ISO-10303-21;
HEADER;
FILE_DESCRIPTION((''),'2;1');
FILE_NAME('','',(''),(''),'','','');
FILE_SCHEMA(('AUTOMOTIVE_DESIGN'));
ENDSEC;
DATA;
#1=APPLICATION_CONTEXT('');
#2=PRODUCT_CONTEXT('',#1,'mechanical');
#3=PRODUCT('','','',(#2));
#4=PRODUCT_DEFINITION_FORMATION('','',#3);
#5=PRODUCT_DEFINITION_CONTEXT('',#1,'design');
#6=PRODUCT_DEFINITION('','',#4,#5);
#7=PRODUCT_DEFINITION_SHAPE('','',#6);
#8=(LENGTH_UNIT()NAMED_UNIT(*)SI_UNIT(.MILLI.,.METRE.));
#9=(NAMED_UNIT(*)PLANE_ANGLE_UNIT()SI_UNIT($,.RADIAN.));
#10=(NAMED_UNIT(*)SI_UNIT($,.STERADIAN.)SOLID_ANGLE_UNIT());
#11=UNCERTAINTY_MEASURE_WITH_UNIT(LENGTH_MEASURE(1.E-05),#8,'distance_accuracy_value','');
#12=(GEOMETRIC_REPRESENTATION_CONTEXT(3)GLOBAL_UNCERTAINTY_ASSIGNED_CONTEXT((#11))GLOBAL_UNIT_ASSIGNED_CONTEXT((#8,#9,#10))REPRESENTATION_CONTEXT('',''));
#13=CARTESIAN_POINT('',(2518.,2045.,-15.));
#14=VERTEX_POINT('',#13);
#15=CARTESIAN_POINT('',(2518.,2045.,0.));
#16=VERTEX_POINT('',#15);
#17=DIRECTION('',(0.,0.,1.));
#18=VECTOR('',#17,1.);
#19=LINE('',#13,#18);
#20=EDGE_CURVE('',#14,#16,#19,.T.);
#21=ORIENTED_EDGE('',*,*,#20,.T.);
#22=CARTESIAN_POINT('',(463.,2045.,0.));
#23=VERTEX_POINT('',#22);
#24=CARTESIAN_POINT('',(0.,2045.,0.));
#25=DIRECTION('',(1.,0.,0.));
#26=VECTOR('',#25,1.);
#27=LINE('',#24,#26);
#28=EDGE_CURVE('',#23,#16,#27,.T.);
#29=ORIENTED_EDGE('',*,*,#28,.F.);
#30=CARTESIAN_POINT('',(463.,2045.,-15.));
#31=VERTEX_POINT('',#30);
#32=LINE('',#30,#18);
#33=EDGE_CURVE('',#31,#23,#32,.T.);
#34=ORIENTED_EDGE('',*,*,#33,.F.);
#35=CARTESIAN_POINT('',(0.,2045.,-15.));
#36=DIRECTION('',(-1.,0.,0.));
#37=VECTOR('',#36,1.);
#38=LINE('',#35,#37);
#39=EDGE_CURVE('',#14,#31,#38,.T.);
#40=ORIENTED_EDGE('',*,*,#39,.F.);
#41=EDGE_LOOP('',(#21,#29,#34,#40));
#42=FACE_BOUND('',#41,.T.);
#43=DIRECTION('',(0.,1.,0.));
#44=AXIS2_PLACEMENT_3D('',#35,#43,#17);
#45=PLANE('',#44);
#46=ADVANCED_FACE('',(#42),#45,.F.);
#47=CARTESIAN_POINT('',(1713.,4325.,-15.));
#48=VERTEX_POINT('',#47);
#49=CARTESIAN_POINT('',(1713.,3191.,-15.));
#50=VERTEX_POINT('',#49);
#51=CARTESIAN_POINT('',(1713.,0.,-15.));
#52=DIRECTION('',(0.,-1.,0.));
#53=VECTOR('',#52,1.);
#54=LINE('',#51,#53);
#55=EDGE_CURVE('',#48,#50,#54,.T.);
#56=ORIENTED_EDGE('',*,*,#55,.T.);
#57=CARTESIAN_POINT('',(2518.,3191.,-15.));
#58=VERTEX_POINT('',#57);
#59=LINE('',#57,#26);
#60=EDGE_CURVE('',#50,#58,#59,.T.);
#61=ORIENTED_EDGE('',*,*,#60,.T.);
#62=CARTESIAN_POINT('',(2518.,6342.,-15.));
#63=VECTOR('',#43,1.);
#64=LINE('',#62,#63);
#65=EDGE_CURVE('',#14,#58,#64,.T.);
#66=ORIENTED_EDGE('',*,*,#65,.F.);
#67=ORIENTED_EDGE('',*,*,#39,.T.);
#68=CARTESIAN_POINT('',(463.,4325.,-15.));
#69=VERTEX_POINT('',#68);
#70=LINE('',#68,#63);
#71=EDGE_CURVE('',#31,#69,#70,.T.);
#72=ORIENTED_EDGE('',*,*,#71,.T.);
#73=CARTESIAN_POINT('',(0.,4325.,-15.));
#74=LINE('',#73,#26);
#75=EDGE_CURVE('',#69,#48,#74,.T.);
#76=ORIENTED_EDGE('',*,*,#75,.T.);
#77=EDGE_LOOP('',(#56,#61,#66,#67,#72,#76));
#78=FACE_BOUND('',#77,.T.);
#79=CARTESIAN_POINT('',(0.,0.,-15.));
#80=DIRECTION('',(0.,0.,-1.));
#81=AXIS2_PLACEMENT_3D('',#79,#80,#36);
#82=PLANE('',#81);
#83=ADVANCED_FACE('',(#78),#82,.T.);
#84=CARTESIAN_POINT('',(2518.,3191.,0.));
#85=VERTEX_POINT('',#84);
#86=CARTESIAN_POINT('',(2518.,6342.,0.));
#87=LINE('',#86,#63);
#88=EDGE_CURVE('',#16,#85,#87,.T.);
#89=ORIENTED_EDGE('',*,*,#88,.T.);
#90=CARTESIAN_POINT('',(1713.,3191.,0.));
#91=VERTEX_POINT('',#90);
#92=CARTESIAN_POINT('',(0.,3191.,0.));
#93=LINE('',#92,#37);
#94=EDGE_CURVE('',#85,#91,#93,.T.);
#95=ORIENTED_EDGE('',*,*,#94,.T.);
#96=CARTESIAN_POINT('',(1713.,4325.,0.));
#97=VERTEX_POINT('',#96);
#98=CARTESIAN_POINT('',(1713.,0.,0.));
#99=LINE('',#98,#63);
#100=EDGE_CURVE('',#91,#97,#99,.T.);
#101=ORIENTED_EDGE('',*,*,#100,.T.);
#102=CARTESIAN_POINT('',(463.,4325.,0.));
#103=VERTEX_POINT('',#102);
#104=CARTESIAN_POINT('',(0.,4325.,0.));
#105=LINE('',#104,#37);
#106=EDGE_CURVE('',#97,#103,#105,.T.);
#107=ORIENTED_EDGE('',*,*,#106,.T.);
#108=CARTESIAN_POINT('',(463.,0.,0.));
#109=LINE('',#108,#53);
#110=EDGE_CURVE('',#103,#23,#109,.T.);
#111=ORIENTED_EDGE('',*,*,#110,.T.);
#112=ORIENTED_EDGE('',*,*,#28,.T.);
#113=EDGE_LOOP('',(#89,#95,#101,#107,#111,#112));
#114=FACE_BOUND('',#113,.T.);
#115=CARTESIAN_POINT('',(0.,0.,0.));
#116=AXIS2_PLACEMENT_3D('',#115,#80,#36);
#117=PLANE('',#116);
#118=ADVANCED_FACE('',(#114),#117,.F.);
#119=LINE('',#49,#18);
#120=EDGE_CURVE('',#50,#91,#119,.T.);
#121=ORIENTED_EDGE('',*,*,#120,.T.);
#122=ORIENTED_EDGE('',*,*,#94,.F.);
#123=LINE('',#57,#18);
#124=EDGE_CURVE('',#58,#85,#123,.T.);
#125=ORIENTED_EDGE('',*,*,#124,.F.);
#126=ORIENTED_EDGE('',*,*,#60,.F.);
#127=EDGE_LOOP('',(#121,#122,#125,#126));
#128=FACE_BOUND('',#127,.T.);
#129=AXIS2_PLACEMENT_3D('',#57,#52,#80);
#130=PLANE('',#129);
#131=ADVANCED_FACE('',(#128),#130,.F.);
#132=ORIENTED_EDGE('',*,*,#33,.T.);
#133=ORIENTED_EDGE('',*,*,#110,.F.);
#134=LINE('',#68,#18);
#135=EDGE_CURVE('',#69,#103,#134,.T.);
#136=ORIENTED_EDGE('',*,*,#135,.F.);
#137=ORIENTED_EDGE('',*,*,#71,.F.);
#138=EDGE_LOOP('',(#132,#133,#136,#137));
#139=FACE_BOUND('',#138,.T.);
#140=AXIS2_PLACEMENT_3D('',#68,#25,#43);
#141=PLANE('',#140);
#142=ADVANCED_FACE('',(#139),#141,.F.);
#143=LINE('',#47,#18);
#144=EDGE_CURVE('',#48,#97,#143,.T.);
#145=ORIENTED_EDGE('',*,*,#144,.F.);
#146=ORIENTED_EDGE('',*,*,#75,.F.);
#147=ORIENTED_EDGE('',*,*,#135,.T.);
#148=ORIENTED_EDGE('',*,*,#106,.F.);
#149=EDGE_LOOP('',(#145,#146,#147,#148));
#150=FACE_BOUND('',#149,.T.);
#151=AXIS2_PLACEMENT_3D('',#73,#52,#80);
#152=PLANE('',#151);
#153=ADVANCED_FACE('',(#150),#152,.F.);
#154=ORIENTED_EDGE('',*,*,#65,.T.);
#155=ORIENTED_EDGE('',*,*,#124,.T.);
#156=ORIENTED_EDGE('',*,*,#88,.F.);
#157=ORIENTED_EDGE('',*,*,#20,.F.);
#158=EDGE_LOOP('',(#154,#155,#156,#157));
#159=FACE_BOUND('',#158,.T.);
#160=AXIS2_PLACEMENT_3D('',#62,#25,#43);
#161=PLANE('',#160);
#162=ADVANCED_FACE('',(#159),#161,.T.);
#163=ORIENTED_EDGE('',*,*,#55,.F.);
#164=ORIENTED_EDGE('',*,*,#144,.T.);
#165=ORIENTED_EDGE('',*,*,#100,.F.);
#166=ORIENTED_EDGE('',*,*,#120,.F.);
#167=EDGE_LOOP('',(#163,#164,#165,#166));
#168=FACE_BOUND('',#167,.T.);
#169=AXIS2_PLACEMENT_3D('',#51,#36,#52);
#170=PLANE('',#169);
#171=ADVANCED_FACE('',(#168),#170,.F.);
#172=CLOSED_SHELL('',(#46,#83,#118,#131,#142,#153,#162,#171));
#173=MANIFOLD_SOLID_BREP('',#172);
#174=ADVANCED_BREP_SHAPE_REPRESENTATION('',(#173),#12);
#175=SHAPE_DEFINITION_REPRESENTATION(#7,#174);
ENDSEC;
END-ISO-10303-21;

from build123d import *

# Parameters (mm, degrees)
TABAN_FLAN_1_DEPTH          = 15
KES_EKSTR_ZYON1_DEPTH       = 6824.599709831
KES_EKSTR_ZYON1_DEPTH_BACK  = 6824.599709831
IZIM2_W                     = 2518
IZIM2_H                     = 130
KES_EKSTR_ZYON2_DEPTH       = 6824.599709831
KES_EKSTR_ZYON2_DEPTH_BACK  = 6824.599709831
IZIM3_W                     = 2518
IZIM3_H                     = 135
KES_EKSTR_ZYON3_DEPTH       = 6824.599709831
KES_EKSTR_ZYON3_DEPTH_BACK  = 6824.599709831
IZIM4_W                     = 848
IZIM4_H                     = 915
KES_EKSTR_ZYON4_DEPTH       = 5983.714935546
KES_EKSTR_ZYON4_DEPTH_BACK  = 5983.714935546
IZIM5_W                     = 848
IZIM5_H                     = 467
KES_EKSTR_ZYON5_DEPTH       = 5563.566763644
KES_EKSTR_ZYON5_DEPTH_BACK  = 5563.566763644
IZIM6_W                     = 2518
IZIM6_H                     = 805
IZIM6_W_2                   = 848
IZIM6_H_2                   = 3
KES_EKSTR_ZYON6_DEPTH       = 5560.891905424
KES_EKSTR_ZYON6_DEPTH_BACK  = 5560.891905424
IZIM7_W                     = 2518
IZIM7_H                     = 440
KES_EKSTR_ZYON7_DEPTH       = 5560.891905424
KES_EKSTR_ZYON7_DEPTH_BACK  = 5560.891905424
IZIM8_W                     = 2518
IZIM8_H                     = 102
KES_EKSTR_ZYON8_DEPTH       = 5560.891905424
KES_EKSTR_ZYON8_DEPTH_BACK  = 5560.891905424
IZIM9_W                     = 2518
IZIM9_H                     = 158
IZIM10_W                    = 542
IZIM10_H                    = 327
SEKME1_DEPTH                = 15
KES_EKSTR_ZYON9_DEPTH       = 5560.891905424
KES_EKSTR_ZYON9_DEPTH_BACK  = 5560.891905424
IZIM11_W                    = 1127
IZIM11_H                    = 305
IZIM12_W                    = 1390
IZIM12_H                    = 43
SEKME2_DEPTH                = 15
KES_EKSTR_ZYON10_DEPTH      = 5599.263034192
KES_EKSTR_ZYON10_DEPTH_BACK = 5599.263034192
IZIM13_W                    = 2518
IZIM13_H                    = 127
KES_EKSTR_ZYON11_DEPTH      = 5599.263034192
KES_EKSTR_ZYON11_DEPTH_BACK = 5599.263034192
IZIM14_W                    = 385
IZIM14_H                    = 675
IZIM14_W_2                  = 2518
IZIM14_H_2                  = 148
KES_EKSTR_ZYON12_DEPTH      = 5599.263034192
KES_EKSTR_ZYON12_DEPTH_BACK = 5599.263034192
IZIM15_W                    = 569.702453624
IZIM15_H                    = 675
KES_EKSTR_ZYON13_DEPTH      = 5599.263034192
KES_EKSTR_ZYON13_DEPTH_BACK = 5599.263034192
IZIM16_W                    = 1005
IZIM16_H                    = 305
KES_EKSTR_ZYON14_DEPTH      = 5328.623672896
KES_EKSTR_ZYON14_DEPTH_BACK = 5328.623672896
IZIM17_W                    = 200
IZIM17_H                    = 370
IZIM17_W_2                  = 3
IZIM17_H_2                  = 2280
KES_EKSTR_ZYON16_DEPTH      = 5005.615269928
KES_EKSTR_ZYON16_DEPTH_BACK = 5005.615269928
KES_EKSTR_ZYON17_DEPTH      = 5005.615269928
KES_EKSTR_ZYON17_DEPTH_BACK = 5005.615269928
IZIM20_W                    = 805
IZIM20_H                    = 164


# Sheet-metal steps are written as plain solids
with BuildPart() as part:
    # Çizim1 → Taban-Flanş1 (new body)
    with BuildSketch(Plane.XY):
        Polygon((0, 0), (0, 4630), (1505, 4630), (1505, 6342), (2518, 6342), (2518, 0), align=None)
    extrude(amount=-TABAN_FLAN_1_DEPTH)

    # Çizim2 → Kes-Ekstrüzyon1 (cut, two sides: drawn at the far end of the back side and taken through both)
    with BuildSketch(Plane.XY.offset(-KES_EKSTR_ZYON1_DEPTH_BACK)):
        with Locations((1259, 65)):
            Rectangle(IZIM2_W, IZIM2_H)
    extrude(amount=KES_EKSTR_ZYON1_DEPTH + KES_EKSTR_ZYON1_DEPTH_BACK, mode=Mode.SUBTRACT)

    # Çizim3 → Kes-Ekstrüzyon2 (cut, two sides: drawn at the far end of the back side and taken through both)
    with BuildSketch(Plane.XY.offset(-KES_EKSTR_ZYON2_DEPTH_BACK)):
        with Locations((1259, 197.5)):
            Rectangle(IZIM3_W, IZIM3_H)
    extrude(amount=KES_EKSTR_ZYON2_DEPTH + KES_EKSTR_ZYON2_DEPTH_BACK, mode=Mode.SUBTRACT)

    # Çizim4 → Kes-Ekstrüzyon3 (cut, two sides: drawn at the far end of the back side and taken through both)
    with BuildSketch(Plane.XY.offset(-KES_EKSTR_ZYON3_DEPTH_BACK)):
        with Locations((2094, 5884.5)):
            Rectangle(IZIM4_W, IZIM4_H)
        Polygon((1670, 6342), (1505, 6342), (1505, 4630), (1670, 4630), (1670, 5427), align=None)
    extrude(amount=KES_EKSTR_ZYON3_DEPTH + KES_EKSTR_ZYON3_DEPTH_BACK, mode=Mode.SUBTRACT)

    # Çizim5 → Kes-Ekstrüzyon4 (cut, two sides: drawn at the far end of the back side and taken through both)
    with BuildSketch(Plane.XY.offset(-KES_EKSTR_ZYON4_DEPTH_BACK)):
        with Locations((2094, 5193.5)):
            Rectangle(IZIM5_W, IZIM5_H)
    extrude(amount=KES_EKSTR_ZYON4_DEPTH + KES_EKSTR_ZYON4_DEPTH_BACK, mode=Mode.SUBTRACT)

    # Çizim6 → Kes-Ekstrüzyon5 (cut, two sides: drawn at the far end of the back side and taken through both)
    with BuildSketch(Plane.XY.offset(-KES_EKSTR_ZYON5_DEPTH_BACK)):
        with Locations((1259, 667.5)):
            Rectangle(IZIM6_W, IZIM6_H)
        with Locations((2094, 4958.5)):
            Rectangle(IZIM6_W_2, IZIM6_H_2)
    extrude(amount=KES_EKSTR_ZYON5_DEPTH + KES_EKSTR_ZYON5_DEPTH_BACK, mode=Mode.SUBTRACT)

    # Çizim7 → Kes-Ekstrüzyon6 (cut, two sides: drawn at the far end of the back side and taken through both)
    with BuildSketch(Plane.XY.offset(-KES_EKSTR_ZYON6_DEPTH_BACK)):
        with Locations((1259, 1290)):
            Rectangle(IZIM7_W, IZIM7_H)
    extrude(amount=KES_EKSTR_ZYON6_DEPTH + KES_EKSTR_ZYON6_DEPTH_BACK, mode=Mode.SUBTRACT)

    # Çizim8 → Kes-Ekstrüzyon7 (cut, two sides: drawn at the far end of the back side and taken through both)
    with BuildSketch(Plane.XY.offset(-KES_EKSTR_ZYON7_DEPTH_BACK)):
        with Locations((1259, 1561)):
            Rectangle(IZIM8_W, IZIM8_H)
    extrude(amount=KES_EKSTR_ZYON7_DEPTH + KES_EKSTR_ZYON7_DEPTH_BACK, mode=Mode.SUBTRACT)

    # Çizim9 → Kes-Ekstrüzyon8 (cut, two sides: drawn at the far end of the back side and taken through both)
    with BuildSketch(Plane.XY.offset(-KES_EKSTR_ZYON8_DEPTH_BACK)):
        with Locations((1259, 1691)):
            Rectangle(IZIM9_W, IZIM9_H)
    extrude(amount=KES_EKSTR_ZYON8_DEPTH + KES_EKSTR_ZYON8_DEPTH_BACK, mode=Mode.SUBTRACT)

    # Çizim10 → Sekme1 (add)
    with BuildSketch(Plane.XY):
        with Locations((1399, 4793.5)):
            Rectangle(IZIM10_W, IZIM10_H)
    extrude(amount=-SEKME1_DEPTH)

    # Çizim11 → Kes-Ekstrüzyon9 (cut, two sides: drawn at the far end of the back side and taken through both)
    with BuildSketch(Plane.XY.offset(-KES_EKSTR_ZYON9_DEPTH_BACK)):
        with Locations((563.5, 4477.5)):
            Rectangle(IZIM11_W, IZIM11_H)
    extrude(amount=KES_EKSTR_ZYON9_DEPTH + KES_EKSTR_ZYON9_DEPTH_BACK, mode=Mode.SUBTRACT)

    # Çizim12 → Sekme2 (add)
    with BuildSketch(Plane.XY):
        with Locations((1823, 4978.5)):
            Rectangle(IZIM12_W, IZIM12_H)
    extrude(amount=-SEKME2_DEPTH)

    # Çizim13 → Kes-Ekstrüzyon10 (cut, two sides: drawn at the far end of the back side and taken through both)
    with BuildSketch(Plane(origin=(0, 0, -15), x_dir=(-1, 0, 0), z_dir=(0, 0, -1)).offset(-KES_EKSTR_ZYON10_DEPTH_BACK)):
        with Locations((-1259, 1833.5)):
            Rectangle(IZIM13_W, IZIM13_H)
    extrude(amount=KES_EKSTR_ZYON10_DEPTH + KES_EKSTR_ZYON10_DEPTH_BACK, mode=Mode.SUBTRACT)

    # Çizim14 → Kes-Ekstrüzyon11 (cut, two sides: drawn at the far end of the back side and taken through both)
    with BuildSketch(Plane.XY.offset(-KES_EKSTR_ZYON11_DEPTH_BACK)):
        with Locations((1320.5, 4662.5)):
            Rectangle(IZIM14_W, IZIM14_H)
        with Locations((1259, 1971)):
            Rectangle(IZIM14_W_2, IZIM14_H_2)
    extrude(amount=KES_EKSTR_ZYON11_DEPTH + KES_EKSTR_ZYON11_DEPTH_BACK, mode=Mode.SUBTRACT)

    # Çizim15 → Kes-Ekstrüzyon12 (cut, two sides: drawn at the far end of the back side and taken through both)
    with BuildSketch(Plane.XY.offset(-KES_EKSTR_ZYON12_DEPTH_BACK)):
        with Locations((1228.148773188, 4662.5)):
            Rectangle(IZIM15_W, IZIM15_H)
    extrude(amount=KES_EKSTR_ZYON12_DEPTH + KES_EKSTR_ZYON12_DEPTH_BACK, mode=Mode.SUBTRACT)

    # Çizim16 → Kes-Ekstrüzyon13 (cut, two sides: drawn at the far end of the back side and taken through both)
    with BuildSketch(Plane.XY.offset(-KES_EKSTR_ZYON13_DEPTH_BACK)):
        with Locations((2015.5, 4847.5)):
            Rectangle(IZIM16_W, IZIM16_H)
    extrude(amount=KES_EKSTR_ZYON13_DEPTH + KES_EKSTR_ZYON13_DEPTH_BACK, mode=Mode.SUBTRACT)

    # Çizim17 → Kes-Ekstrüzyon14 (cut, two sides: drawn at the far end of the back side and taken through both)
    with BuildSketch(Plane.XY.offset(-KES_EKSTR_ZYON14_DEPTH_BACK)):
        Polygon((2518, 3355), (2518, 4695), (1713, 4695), (1713, 4325), (1713, 3355), align=None)
        with Locations((1613, 4510)):
            Rectangle(IZIM17_W, IZIM17_H)
        with Locations((1.5, 3185)):
            Rectangle(IZIM17_W_2, IZIM17_H_2)
    extrude(amount=KES_EKSTR_ZYON14_DEPTH + KES_EKSTR_ZYON14_DEPTH_BACK, mode=Mode.SUBTRACT)

    # Çizim19 → Kes-Ekstrüzyon16 (cut, two sides: drawn at the far end of the back side and taken through both)
    with BuildSketch(Plane.XY.offset(-KES_EKSTR_ZYON16_DEPTH_BACK)):
        Polygon((463, 4325), (463, 2045), (3, 2045), (0, 4325), align=None)
    extrude(amount=KES_EKSTR_ZYON16_DEPTH + KES_EKSTR_ZYON16_DEPTH_BACK, mode=Mode.SUBTRACT)

    # Çizim20 → Kes-Ekstrüzyon17 (cut, two sides: drawn at the far end of the back side and taken through both)
    with BuildSketch(Plane.XY.offset(-KES_EKSTR_ZYON17_DEPTH_BACK)):
        with Locations((2115.5, 3273)):
            Rectangle(IZIM20_W, IZIM20_H)
    extrude(amount=KES_EKSTR_ZYON17_DEPTH + KES_EKSTR_ZYON17_DEPTH_BACK, mode=Mode.SUBTRACT)


solid = part.part
